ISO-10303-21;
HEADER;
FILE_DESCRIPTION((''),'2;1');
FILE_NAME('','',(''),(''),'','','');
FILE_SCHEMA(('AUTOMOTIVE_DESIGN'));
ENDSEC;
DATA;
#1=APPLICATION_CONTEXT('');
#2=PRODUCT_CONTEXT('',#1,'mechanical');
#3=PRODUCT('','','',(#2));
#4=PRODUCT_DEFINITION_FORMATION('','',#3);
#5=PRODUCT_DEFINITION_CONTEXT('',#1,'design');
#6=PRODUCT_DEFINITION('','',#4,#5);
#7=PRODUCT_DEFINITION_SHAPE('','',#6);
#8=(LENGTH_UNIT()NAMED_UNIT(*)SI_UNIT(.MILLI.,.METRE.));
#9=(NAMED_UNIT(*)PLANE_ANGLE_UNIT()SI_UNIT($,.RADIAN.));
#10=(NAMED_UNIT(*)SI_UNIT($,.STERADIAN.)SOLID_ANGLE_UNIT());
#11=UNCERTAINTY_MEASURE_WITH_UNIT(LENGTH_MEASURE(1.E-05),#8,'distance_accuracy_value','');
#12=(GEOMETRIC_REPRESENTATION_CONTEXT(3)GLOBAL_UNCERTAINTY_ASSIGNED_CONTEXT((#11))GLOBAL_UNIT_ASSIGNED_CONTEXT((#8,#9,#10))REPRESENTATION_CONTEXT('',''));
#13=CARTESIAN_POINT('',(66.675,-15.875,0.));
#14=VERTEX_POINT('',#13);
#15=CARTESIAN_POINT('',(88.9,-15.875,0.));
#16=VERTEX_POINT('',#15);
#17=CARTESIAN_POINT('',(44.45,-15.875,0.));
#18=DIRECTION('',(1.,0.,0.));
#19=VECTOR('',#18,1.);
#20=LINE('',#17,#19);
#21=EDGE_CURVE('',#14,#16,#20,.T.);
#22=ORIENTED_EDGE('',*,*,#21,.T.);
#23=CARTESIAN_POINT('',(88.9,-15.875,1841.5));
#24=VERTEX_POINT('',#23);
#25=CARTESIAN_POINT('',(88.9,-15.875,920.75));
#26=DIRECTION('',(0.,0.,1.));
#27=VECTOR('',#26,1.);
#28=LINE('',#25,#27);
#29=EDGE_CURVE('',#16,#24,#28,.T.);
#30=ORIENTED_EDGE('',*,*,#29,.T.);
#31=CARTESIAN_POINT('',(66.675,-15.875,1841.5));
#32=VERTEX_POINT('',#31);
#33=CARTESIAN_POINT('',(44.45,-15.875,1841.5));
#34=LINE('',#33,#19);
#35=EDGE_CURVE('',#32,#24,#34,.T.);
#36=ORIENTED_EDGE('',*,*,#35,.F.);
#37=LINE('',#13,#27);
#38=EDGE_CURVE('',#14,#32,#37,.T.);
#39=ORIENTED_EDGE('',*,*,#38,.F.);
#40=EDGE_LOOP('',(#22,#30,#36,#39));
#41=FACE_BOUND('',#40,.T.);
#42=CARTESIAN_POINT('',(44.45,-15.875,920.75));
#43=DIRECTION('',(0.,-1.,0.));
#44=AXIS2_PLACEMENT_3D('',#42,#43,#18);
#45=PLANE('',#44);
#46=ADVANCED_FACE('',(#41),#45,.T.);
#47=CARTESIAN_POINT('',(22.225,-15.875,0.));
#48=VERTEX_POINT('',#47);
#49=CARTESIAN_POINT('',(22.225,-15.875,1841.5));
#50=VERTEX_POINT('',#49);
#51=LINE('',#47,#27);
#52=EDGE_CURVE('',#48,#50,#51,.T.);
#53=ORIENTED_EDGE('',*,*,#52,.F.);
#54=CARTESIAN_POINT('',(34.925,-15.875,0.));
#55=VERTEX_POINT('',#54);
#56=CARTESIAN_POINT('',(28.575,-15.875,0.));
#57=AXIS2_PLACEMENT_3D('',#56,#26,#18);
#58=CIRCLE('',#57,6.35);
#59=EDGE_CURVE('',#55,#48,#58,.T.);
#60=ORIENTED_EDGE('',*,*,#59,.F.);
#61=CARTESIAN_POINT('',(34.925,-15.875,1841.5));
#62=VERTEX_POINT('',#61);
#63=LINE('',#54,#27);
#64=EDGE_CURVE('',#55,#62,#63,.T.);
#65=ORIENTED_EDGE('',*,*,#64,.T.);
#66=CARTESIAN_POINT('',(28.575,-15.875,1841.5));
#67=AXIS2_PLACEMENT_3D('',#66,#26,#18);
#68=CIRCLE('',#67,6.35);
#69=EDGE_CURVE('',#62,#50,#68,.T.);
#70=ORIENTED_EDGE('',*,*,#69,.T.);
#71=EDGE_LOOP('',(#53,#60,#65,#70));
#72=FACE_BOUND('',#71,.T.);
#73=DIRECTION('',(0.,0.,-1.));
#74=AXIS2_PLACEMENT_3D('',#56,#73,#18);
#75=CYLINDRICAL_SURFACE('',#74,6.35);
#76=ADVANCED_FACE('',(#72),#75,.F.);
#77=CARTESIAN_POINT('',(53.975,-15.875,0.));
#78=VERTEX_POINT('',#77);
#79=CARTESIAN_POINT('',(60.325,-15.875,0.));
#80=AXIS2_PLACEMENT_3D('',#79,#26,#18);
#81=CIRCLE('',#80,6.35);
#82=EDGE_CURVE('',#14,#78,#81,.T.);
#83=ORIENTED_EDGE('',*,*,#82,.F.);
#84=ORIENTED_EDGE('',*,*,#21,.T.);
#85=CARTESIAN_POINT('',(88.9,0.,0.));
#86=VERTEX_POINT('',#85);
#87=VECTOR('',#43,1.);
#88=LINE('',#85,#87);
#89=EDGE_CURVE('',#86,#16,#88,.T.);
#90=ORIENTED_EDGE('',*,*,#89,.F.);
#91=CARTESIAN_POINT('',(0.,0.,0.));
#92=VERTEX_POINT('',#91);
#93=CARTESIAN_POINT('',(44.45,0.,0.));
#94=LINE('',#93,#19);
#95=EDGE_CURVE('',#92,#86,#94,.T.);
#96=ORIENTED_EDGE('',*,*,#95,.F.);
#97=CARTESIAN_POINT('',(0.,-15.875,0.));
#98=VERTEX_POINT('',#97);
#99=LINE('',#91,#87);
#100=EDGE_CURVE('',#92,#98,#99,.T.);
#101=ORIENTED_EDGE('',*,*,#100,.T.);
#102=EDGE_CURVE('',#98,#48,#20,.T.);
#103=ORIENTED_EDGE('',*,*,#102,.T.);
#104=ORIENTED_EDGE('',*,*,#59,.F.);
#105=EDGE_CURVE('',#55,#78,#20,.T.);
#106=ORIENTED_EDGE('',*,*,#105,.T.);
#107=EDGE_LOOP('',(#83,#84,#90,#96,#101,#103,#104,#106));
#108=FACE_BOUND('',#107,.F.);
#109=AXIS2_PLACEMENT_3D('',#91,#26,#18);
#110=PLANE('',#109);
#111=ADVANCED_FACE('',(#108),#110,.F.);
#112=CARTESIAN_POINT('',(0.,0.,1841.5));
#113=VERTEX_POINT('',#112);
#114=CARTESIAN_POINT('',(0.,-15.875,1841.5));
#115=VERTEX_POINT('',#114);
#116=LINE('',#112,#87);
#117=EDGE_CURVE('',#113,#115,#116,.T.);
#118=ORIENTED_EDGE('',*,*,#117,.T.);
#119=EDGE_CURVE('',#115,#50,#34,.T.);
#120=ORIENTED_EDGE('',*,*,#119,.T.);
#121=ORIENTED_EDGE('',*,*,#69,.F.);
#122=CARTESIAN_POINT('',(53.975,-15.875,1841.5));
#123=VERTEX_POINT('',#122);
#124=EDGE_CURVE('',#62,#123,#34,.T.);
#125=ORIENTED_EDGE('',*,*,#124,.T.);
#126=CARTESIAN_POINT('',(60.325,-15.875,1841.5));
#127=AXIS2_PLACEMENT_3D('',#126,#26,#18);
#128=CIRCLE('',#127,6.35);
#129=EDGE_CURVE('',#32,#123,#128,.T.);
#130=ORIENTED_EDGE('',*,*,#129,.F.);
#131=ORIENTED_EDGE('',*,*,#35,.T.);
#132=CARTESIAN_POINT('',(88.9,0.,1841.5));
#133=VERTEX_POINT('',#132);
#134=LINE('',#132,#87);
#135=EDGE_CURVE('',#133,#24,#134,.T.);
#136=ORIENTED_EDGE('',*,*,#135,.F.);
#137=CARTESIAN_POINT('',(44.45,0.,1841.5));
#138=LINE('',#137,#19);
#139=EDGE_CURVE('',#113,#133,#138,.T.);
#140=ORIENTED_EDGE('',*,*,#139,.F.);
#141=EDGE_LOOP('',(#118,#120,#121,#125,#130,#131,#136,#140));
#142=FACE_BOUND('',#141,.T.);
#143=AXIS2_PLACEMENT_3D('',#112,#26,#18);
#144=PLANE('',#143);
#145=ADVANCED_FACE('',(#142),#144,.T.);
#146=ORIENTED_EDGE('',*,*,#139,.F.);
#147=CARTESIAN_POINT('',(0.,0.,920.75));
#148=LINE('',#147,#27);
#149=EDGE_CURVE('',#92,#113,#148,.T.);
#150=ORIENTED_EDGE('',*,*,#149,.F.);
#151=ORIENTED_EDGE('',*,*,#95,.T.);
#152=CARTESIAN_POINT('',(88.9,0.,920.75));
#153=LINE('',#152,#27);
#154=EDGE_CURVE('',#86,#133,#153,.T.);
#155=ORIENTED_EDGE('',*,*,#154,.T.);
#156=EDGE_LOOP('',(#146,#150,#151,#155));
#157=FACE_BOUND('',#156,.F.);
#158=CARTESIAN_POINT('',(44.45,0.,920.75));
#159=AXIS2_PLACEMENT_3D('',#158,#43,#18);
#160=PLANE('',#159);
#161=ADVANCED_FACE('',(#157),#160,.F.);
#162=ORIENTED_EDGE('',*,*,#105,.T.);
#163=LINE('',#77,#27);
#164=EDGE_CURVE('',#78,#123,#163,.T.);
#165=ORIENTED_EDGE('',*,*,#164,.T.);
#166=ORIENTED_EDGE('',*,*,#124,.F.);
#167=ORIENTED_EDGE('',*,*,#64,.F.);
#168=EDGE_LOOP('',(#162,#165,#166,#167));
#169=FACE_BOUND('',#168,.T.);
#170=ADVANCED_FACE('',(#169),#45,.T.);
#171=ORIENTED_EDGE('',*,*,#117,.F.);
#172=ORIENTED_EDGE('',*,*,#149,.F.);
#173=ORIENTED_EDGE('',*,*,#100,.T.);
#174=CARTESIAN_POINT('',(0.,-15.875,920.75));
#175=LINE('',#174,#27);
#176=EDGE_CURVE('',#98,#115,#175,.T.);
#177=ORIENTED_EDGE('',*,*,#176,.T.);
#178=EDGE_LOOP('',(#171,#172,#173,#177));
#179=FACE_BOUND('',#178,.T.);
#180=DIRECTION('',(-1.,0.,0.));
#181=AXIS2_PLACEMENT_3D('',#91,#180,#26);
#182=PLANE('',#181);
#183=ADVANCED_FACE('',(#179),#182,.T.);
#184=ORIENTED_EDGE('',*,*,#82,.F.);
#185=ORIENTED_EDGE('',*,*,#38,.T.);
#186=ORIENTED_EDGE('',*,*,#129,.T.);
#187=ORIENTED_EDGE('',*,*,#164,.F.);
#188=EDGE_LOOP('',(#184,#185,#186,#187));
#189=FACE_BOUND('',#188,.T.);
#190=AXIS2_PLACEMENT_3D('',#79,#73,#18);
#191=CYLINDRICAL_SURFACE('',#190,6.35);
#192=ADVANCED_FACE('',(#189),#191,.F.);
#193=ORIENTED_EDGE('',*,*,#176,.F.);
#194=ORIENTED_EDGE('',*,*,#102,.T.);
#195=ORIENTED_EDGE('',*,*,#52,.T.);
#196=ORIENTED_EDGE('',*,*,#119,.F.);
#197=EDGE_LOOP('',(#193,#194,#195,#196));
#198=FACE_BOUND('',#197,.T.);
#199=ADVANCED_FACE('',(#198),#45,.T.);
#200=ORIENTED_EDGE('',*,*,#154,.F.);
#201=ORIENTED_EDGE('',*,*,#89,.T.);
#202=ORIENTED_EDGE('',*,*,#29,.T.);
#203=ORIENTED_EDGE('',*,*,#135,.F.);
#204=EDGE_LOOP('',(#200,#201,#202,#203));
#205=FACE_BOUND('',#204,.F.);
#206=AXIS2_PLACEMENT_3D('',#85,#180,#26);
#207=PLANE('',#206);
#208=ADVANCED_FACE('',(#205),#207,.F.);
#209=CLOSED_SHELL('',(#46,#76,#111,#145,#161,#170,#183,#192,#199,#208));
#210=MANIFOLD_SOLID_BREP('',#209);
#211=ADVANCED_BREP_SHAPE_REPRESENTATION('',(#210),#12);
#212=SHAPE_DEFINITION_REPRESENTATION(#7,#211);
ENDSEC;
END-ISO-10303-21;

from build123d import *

# Parameters (mm, degrees)
F0_W     = 88.9
F0_H     = 1841.5
F1_DEPTH = 15.875
F3_DEPTH = 1841.5


# Not quite as in the source:
# - a length typed as a fraction of an inch, garbled in the dataset ("3 / 203.2 mm" for 3/8 in), is restored


with BuildPart() as f1:
    # F0 (on Front) → F1 (new body)
    with BuildSketch(Plane.XZ):
        with Locations((44.45, 920.75)):
            Rectangle(F0_W, F0_H)
    extrude(amount=F1_DEPTH)

    # F2 (on Top) → F3 (cut)
    with BuildSketch(Plane.XY):
        with BuildLine():
            Line((22.225, -15.875), (34.925, -15.875))
            ThreePointArc((34.925, -15.875), (28.575, -9.525), (22.225, -15.875))
        make_face()
        with BuildLine():
            Line((53.975, -15.875), (66.675, -15.875))
            ThreePointArc((66.675, -15.875), (60.325, -9.525), (53.975, -15.875))
        make_face()
    extrude(amount=F3_DEPTH, mode=Mode.SUBTRACT)


solid = f1.part
